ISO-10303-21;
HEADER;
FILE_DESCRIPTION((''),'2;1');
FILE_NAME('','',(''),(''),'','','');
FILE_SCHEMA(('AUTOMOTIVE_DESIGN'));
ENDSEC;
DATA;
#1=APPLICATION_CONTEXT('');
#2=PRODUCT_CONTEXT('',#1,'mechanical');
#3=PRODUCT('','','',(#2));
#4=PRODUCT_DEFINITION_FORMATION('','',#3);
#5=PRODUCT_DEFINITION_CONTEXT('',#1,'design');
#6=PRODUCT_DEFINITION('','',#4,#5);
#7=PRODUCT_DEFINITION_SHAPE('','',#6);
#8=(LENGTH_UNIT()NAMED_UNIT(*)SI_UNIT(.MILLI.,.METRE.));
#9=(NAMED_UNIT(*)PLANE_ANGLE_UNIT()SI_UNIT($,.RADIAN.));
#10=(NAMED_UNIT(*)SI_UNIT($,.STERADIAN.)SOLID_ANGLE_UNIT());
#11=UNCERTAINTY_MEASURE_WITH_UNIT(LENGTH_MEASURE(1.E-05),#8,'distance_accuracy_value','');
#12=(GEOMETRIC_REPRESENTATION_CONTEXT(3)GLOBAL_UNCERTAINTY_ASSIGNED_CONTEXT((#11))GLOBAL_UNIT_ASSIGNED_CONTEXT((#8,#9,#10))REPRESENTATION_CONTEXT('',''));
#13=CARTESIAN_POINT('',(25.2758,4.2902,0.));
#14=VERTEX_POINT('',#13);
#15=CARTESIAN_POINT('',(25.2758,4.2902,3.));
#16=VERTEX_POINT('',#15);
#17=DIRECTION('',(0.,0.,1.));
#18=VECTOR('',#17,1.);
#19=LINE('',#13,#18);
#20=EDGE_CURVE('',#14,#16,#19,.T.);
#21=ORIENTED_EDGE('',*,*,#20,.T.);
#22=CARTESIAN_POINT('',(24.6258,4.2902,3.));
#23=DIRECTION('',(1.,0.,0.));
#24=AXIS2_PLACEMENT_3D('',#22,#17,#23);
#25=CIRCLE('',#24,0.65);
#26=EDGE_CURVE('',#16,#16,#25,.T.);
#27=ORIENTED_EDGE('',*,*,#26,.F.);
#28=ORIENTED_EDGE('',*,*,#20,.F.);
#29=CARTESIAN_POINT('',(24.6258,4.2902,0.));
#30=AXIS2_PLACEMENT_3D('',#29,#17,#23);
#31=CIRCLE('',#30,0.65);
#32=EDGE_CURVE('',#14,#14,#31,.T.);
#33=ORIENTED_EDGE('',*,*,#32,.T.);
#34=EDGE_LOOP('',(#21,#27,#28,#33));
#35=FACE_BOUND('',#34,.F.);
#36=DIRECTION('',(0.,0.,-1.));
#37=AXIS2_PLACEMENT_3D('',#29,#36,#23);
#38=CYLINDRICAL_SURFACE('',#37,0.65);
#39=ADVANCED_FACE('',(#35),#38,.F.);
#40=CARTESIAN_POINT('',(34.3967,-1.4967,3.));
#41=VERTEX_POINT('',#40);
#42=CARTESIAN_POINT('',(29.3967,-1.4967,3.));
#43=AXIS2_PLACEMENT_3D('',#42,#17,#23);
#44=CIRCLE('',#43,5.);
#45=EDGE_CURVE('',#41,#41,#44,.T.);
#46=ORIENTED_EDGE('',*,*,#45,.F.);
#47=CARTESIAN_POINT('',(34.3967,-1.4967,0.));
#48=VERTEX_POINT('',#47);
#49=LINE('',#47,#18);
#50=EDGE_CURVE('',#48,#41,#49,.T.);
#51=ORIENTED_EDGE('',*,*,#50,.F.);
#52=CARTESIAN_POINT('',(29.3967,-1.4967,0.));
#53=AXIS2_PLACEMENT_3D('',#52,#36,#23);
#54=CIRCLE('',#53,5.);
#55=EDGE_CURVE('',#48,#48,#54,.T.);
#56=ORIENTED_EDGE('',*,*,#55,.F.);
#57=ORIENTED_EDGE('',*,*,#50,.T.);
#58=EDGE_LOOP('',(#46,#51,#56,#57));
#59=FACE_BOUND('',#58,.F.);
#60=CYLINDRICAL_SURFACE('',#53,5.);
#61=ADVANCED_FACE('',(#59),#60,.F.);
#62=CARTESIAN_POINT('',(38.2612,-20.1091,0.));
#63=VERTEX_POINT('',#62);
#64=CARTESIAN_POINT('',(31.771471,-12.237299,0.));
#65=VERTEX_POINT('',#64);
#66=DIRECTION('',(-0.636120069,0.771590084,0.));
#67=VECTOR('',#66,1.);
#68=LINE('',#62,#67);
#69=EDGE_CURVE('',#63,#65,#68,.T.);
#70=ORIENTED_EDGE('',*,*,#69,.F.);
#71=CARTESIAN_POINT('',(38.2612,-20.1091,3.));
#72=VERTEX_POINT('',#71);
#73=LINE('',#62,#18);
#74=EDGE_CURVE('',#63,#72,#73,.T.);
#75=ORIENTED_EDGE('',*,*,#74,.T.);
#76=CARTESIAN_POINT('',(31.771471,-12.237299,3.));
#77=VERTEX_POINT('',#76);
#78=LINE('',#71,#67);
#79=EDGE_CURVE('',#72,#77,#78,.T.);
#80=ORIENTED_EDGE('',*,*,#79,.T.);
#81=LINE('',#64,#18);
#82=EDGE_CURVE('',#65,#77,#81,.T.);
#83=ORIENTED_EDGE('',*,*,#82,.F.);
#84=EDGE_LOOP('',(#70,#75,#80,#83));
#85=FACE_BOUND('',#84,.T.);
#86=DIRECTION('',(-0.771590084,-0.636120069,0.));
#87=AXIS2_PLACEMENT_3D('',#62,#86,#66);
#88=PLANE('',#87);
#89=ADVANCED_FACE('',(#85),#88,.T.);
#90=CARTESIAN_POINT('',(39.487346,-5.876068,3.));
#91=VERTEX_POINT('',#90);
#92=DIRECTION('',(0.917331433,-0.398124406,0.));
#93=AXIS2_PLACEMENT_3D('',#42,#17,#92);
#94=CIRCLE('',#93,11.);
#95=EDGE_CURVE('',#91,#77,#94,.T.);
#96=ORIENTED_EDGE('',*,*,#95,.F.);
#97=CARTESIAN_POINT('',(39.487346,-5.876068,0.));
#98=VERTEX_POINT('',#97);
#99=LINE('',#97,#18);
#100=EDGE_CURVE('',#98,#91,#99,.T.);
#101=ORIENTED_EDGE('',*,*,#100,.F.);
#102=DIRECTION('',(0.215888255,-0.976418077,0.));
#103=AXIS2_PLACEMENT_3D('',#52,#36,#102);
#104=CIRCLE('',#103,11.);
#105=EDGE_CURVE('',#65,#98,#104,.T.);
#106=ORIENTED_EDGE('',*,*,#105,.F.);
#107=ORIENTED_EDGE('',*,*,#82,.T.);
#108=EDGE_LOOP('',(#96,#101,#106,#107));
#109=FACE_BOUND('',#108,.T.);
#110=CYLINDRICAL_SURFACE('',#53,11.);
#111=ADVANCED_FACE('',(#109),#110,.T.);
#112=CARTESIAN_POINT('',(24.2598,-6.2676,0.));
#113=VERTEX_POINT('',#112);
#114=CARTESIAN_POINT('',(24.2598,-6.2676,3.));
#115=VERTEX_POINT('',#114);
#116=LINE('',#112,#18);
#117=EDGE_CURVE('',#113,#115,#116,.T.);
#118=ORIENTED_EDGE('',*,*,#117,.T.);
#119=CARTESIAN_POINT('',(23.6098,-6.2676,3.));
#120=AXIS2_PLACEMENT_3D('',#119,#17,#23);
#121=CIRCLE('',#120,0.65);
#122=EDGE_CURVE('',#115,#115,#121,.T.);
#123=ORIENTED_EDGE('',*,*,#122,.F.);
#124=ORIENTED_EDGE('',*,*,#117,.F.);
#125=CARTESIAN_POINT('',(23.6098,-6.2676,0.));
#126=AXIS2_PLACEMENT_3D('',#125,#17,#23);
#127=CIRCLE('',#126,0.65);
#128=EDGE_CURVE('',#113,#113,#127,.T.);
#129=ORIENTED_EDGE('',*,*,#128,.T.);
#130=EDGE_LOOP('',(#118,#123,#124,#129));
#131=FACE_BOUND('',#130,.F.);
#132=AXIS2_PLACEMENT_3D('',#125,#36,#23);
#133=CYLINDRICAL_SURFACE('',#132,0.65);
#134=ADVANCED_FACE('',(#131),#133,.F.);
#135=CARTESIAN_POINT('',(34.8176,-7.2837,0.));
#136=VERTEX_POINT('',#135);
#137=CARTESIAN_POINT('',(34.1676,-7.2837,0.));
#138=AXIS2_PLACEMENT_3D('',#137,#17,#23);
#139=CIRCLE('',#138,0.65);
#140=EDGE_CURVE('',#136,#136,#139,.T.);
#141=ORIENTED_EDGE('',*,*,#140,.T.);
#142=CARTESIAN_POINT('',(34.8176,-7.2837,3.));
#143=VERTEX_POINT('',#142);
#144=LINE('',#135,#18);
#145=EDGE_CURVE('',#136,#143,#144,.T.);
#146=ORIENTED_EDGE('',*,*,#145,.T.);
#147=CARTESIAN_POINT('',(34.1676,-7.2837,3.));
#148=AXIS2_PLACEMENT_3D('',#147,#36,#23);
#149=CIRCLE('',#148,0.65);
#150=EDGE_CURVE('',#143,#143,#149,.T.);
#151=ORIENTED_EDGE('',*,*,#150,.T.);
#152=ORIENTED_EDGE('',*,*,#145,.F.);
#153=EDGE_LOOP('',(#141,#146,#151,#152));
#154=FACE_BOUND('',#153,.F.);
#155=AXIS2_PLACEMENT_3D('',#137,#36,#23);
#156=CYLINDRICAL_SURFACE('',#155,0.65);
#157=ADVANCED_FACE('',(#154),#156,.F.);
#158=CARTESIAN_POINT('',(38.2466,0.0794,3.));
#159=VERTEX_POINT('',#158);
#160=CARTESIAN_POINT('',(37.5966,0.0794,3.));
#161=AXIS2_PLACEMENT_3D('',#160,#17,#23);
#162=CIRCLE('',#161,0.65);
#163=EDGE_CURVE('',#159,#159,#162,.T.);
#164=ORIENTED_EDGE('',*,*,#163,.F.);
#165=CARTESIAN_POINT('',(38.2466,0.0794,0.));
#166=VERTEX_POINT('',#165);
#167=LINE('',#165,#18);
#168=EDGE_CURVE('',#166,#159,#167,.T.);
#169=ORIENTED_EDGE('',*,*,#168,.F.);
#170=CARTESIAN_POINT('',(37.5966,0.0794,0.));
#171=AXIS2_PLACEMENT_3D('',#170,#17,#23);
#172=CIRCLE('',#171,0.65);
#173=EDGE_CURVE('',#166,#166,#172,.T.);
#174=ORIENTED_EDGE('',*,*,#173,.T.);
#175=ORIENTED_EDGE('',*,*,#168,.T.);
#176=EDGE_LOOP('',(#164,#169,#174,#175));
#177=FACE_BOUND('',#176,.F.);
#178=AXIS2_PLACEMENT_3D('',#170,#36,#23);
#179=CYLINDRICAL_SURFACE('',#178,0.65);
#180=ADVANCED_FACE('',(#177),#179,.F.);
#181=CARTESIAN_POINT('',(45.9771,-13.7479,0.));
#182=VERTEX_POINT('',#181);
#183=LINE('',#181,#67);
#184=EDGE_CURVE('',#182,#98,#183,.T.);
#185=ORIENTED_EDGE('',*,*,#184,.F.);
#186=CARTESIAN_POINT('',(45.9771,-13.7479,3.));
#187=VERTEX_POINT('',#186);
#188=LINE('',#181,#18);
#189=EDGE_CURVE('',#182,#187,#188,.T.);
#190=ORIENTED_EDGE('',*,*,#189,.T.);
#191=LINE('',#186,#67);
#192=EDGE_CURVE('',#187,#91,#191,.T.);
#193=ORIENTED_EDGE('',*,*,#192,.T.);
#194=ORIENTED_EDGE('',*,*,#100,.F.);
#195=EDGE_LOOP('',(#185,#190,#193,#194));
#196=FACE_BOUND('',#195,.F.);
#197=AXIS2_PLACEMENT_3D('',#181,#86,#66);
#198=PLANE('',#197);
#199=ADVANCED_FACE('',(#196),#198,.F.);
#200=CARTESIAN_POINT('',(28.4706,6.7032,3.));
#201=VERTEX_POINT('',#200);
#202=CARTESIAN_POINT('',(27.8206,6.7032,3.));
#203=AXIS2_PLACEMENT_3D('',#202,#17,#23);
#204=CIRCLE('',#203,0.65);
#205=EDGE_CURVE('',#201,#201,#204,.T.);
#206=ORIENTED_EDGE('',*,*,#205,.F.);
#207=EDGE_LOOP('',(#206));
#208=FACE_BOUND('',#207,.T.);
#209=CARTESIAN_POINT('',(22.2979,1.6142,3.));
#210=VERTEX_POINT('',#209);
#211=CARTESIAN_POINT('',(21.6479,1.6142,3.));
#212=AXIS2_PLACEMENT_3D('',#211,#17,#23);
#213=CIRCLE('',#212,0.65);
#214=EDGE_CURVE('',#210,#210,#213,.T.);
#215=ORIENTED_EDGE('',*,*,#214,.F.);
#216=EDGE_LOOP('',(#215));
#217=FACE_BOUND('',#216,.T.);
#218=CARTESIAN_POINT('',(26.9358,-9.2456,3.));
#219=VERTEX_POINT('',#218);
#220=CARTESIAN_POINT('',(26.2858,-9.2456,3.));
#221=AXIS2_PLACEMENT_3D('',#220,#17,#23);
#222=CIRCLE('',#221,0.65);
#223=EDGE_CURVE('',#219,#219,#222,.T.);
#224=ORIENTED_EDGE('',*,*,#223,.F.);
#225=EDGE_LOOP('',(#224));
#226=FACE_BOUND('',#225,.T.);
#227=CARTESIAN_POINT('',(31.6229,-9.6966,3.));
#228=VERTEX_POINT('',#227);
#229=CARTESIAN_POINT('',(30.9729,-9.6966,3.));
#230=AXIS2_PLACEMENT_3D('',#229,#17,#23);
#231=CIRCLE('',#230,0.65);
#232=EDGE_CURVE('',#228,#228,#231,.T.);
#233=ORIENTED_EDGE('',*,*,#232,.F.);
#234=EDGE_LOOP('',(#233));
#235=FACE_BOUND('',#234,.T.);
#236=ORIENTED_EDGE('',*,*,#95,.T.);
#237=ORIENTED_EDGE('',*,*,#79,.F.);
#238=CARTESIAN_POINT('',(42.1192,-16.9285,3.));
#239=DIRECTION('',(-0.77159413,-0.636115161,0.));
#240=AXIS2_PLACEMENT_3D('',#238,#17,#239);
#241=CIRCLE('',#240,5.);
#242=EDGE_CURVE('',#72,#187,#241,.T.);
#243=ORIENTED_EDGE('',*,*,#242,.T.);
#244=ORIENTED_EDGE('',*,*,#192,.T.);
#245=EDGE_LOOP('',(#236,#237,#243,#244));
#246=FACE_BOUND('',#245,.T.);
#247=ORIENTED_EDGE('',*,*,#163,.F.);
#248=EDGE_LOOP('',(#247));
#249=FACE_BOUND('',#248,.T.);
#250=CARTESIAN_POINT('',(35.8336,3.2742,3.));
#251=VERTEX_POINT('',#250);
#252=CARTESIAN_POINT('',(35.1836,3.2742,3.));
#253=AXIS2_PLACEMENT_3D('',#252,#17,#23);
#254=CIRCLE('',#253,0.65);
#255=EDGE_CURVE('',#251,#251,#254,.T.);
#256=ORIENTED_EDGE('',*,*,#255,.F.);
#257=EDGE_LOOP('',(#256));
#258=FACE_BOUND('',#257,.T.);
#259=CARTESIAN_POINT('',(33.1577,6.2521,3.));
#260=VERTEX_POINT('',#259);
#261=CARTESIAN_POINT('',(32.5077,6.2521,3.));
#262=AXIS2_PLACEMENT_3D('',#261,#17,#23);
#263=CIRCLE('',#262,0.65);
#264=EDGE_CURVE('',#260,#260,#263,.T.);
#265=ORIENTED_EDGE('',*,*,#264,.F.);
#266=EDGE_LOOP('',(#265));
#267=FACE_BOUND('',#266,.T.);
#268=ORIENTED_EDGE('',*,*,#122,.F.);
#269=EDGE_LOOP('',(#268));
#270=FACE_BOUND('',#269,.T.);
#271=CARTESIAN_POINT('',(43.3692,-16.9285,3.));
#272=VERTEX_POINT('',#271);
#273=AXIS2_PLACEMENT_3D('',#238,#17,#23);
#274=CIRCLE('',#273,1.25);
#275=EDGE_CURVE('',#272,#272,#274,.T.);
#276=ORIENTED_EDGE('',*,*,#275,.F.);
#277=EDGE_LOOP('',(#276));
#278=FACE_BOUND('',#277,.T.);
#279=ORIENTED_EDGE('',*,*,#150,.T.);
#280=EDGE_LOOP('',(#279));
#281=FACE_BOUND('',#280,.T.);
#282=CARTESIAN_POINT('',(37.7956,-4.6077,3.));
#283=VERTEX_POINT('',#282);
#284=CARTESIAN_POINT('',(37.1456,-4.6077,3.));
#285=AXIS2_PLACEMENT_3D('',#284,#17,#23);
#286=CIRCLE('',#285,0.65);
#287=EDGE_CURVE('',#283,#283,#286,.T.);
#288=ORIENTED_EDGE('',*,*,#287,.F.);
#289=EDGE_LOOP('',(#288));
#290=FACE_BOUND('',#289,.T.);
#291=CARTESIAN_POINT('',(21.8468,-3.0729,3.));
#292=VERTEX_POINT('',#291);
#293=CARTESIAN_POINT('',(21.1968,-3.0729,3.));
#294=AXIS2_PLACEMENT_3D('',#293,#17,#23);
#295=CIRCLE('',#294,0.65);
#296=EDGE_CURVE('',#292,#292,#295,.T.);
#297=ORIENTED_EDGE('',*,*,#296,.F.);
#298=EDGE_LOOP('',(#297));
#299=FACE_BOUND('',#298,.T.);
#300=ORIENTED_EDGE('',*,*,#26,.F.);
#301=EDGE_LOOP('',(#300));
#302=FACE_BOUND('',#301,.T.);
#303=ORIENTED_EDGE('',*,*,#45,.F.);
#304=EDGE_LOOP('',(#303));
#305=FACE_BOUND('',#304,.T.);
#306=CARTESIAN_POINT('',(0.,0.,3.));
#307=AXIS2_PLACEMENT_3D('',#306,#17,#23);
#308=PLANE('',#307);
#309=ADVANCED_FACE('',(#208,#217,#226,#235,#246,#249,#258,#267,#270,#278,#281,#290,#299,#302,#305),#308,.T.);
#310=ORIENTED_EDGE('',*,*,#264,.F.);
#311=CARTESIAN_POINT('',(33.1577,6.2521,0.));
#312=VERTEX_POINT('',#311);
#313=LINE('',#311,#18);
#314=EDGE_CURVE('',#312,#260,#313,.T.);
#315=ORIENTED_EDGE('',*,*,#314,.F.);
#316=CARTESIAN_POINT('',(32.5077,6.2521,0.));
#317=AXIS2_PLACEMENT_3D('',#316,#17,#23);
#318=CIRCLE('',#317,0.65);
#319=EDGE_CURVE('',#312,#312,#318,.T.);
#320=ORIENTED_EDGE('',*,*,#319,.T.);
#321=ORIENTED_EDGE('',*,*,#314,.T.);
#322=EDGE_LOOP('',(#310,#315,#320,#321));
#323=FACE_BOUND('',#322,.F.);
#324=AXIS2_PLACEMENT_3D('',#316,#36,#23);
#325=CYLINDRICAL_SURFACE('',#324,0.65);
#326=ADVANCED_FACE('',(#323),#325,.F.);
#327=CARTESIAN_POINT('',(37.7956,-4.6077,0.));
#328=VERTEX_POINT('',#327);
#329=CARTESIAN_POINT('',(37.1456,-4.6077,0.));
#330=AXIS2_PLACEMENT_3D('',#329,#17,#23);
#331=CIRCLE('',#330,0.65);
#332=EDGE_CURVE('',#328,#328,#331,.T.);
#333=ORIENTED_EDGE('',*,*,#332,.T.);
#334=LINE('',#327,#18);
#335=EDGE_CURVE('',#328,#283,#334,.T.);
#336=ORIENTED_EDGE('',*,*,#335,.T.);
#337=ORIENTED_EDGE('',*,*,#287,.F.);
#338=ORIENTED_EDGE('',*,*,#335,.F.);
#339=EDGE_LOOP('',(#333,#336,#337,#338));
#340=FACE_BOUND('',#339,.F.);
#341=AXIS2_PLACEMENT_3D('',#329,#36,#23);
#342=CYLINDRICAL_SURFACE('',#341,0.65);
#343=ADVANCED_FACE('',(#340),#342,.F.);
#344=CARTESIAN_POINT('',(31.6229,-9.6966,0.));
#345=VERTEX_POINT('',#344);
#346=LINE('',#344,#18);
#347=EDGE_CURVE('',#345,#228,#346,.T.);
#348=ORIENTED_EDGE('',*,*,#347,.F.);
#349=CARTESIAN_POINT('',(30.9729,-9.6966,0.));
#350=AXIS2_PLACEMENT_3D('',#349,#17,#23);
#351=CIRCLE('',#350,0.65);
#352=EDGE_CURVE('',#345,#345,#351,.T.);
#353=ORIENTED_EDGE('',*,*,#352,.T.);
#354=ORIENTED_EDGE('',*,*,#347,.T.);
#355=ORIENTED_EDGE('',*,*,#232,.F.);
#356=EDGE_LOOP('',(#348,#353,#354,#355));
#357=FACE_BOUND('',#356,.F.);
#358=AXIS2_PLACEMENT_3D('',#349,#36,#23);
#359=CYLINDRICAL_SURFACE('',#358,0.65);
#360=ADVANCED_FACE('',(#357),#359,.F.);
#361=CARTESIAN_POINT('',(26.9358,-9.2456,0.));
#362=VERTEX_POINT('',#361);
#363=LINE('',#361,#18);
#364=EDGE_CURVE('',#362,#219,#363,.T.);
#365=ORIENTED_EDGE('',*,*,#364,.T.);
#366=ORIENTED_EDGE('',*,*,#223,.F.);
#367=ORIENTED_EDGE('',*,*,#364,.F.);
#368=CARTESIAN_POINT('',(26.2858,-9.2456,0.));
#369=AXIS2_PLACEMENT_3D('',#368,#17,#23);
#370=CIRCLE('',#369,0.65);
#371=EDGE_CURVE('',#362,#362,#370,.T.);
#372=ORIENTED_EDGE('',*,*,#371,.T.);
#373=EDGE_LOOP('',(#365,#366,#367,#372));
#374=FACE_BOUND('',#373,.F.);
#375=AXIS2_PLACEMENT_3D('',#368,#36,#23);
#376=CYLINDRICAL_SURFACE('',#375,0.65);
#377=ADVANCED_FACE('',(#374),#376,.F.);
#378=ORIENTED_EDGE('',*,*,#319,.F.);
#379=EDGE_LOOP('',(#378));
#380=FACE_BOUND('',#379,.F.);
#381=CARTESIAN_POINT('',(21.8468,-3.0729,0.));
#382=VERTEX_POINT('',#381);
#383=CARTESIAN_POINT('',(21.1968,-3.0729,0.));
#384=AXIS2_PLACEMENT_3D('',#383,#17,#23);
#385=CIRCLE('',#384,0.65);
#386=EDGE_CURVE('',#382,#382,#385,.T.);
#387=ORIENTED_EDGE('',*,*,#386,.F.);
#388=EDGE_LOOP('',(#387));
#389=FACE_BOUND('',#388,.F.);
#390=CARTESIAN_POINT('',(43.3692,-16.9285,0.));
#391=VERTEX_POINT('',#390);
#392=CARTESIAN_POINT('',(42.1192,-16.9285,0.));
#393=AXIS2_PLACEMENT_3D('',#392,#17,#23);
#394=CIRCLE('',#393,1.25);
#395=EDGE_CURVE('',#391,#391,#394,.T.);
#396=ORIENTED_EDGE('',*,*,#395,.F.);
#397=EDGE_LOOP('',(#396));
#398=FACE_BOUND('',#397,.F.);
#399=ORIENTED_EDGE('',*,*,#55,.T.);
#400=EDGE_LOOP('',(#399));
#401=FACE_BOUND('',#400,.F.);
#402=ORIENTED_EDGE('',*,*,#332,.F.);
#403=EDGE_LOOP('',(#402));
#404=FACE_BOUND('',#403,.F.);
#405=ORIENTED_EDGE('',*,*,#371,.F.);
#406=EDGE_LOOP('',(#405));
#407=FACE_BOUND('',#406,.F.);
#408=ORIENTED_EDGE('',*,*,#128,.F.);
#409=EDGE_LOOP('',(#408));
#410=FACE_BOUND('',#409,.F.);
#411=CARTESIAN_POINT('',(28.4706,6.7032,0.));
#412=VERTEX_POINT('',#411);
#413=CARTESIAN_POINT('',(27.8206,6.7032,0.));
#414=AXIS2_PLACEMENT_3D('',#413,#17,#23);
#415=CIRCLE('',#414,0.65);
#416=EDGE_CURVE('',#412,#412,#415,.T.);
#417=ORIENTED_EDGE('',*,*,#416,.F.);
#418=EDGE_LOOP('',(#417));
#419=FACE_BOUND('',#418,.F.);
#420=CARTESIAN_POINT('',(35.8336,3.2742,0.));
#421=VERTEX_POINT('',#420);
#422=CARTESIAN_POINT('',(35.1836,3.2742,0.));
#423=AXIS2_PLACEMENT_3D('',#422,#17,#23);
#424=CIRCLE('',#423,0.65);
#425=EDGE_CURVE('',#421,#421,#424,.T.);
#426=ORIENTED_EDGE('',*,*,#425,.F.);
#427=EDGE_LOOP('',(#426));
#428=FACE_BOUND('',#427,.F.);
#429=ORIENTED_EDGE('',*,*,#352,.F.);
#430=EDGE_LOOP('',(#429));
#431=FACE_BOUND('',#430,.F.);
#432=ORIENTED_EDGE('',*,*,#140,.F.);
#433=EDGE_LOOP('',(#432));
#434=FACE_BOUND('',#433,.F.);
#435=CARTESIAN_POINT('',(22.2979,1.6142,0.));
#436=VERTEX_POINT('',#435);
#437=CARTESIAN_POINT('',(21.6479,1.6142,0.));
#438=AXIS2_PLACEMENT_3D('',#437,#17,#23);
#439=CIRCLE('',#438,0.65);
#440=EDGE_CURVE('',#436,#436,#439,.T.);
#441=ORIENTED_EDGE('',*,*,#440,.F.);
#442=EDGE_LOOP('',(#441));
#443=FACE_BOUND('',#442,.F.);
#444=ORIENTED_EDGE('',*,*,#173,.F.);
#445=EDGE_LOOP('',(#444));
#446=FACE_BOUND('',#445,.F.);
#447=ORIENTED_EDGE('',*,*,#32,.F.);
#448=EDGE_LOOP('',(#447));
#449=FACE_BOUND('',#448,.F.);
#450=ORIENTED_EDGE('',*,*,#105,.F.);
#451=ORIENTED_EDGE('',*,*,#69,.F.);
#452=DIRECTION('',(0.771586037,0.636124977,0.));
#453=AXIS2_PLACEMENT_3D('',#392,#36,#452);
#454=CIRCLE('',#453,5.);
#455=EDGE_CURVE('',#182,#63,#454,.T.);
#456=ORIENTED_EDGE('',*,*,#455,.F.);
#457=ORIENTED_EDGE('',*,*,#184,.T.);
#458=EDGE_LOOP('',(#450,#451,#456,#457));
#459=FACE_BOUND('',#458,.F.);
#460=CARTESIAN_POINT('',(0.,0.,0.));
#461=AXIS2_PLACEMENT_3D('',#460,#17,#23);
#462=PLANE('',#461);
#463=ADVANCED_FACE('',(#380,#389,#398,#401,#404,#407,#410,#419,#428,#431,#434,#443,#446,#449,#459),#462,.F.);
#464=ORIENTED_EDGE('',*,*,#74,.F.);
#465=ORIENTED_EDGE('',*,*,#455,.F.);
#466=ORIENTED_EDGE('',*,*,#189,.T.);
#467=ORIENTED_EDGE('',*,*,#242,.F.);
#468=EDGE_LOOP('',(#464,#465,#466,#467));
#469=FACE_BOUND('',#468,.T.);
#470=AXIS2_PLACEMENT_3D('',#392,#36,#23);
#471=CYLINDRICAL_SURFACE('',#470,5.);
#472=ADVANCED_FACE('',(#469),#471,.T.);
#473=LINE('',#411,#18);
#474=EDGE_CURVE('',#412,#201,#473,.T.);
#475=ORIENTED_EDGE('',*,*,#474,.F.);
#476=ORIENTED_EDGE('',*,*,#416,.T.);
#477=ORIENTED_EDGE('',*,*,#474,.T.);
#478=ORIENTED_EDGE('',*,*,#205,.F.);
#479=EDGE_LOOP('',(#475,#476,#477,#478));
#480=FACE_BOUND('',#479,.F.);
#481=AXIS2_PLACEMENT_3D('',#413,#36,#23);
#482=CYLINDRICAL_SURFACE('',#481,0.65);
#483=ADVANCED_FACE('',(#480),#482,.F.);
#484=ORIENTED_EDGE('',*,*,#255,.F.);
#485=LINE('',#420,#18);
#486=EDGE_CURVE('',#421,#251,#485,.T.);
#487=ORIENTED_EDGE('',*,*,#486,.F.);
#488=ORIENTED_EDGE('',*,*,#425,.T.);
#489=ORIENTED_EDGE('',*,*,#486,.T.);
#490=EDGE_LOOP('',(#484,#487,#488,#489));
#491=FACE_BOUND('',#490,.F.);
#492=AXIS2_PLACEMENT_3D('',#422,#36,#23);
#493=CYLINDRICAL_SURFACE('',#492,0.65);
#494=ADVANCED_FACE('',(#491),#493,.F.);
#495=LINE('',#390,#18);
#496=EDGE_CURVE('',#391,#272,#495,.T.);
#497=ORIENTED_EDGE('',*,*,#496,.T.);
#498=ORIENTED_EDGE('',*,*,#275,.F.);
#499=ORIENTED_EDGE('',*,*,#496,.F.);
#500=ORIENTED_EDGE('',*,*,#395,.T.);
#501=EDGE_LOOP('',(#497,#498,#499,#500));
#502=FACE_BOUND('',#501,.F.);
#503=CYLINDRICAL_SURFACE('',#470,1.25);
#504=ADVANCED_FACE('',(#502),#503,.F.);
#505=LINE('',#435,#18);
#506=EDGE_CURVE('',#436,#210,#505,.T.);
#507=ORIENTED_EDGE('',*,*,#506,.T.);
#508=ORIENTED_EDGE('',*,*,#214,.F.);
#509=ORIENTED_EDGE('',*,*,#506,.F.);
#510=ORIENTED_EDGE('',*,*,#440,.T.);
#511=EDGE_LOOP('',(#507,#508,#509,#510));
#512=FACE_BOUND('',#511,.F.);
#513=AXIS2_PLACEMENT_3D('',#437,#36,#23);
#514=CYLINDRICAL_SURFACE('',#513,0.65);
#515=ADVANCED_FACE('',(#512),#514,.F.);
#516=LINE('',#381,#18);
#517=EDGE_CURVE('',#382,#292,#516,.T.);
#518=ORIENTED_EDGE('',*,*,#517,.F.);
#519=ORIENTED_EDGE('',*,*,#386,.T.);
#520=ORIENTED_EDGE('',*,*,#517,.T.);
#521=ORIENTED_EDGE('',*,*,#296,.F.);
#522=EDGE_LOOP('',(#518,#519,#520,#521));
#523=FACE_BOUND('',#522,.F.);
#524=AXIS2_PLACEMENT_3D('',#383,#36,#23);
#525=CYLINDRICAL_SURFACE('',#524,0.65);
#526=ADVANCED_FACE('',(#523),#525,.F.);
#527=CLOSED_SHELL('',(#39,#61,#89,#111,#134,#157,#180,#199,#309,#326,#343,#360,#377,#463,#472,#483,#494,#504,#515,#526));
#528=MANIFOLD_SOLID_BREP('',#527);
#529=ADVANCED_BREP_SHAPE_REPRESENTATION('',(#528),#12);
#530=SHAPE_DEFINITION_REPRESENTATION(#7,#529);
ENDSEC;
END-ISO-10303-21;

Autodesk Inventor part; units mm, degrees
ref_plane "YZ Plane" through (0, 0, 0) normal (1, 0, 0) x (0, 1, 0)
ref_plane "XZ Plane" through (0, 0, 0) normal (0, 1, 0) x (-1, 0, 0)
ref_plane "作業平面1" through (0, 0, 0) normal (0, 0, 1) x (1, 0, 0)
sketch "スケッチ1" plane through (0, 0, 0) normal (0, 0, 1) x (1, 0, 0)
  circle A0 centre (30.9729, -9.6966) radius 0.65 projected
  circle A1 centre (27.8206, 6.7032) radius 0.65 projected
  circle A2 centre (37.1456, -4.6077) radius 0.65 projected
  circle A3 centre (23.6098, -6.2676) radius 0.65 projected
  circle A4 centre (35.1836, 3.2742) radius 0.65 projected
  circle A5 centre (21.6479, 1.6142) radius 0.65 projected
  circle A6 centre (24.6258, 4.2902) radius 0.65 projected
  circle A7 centre (34.1676, -7.2837) radius 0.65 projected
  circle A8 centre (32.5077, 6.2521) radius 0.65 projected
  circle A9 centre (26.2858, -9.2456) radius 0.65 projected
  circle A10 centre (37.5966, 0.0794) radius 0.65 projected
  circle A11 centre (21.1968, -3.0729) radius 0.65 projected
  circle A12 centre (29.3967, -1.4967) radius 1.4 projected
  circle A13 centre (29.3967, -1.4967) radius 10 projected
  circle A14 centre (29.3967, -1.4967) radius 5
  circle A15 centre (42.1192, -16.9285) radius 1.25
  line L0 (29.3967, -1.4967) -> (34.1676, -7.2837)
  circle A16 centre (42.1192, -16.9285) radius 5
  line L1 (38.2612, -20.1091) -> (25.5388, -4.6773)
  line L2 (45.9771, -13.7479) -> (33.2547, 1.6839)
  circle A17 centre (29.3967, -1.4967) radius 11
  point P0 (0, 0)
  dimension "d0" = 10
  dimension "d1" = 2.5
  dimension "d2" = 20
  dimension "d3" = 10
  dimension "d4" = 22
extrude "押し出し1" add sketch "スケッチ1" along normal blind 3 contours A13 L2 A14 L1 | A13 L1 A17 L2 | L1 A14 L2 A13 | A13 L2 A17 L1 | A17 L2 A16 L1 | A16
properties part number "hornLink"
